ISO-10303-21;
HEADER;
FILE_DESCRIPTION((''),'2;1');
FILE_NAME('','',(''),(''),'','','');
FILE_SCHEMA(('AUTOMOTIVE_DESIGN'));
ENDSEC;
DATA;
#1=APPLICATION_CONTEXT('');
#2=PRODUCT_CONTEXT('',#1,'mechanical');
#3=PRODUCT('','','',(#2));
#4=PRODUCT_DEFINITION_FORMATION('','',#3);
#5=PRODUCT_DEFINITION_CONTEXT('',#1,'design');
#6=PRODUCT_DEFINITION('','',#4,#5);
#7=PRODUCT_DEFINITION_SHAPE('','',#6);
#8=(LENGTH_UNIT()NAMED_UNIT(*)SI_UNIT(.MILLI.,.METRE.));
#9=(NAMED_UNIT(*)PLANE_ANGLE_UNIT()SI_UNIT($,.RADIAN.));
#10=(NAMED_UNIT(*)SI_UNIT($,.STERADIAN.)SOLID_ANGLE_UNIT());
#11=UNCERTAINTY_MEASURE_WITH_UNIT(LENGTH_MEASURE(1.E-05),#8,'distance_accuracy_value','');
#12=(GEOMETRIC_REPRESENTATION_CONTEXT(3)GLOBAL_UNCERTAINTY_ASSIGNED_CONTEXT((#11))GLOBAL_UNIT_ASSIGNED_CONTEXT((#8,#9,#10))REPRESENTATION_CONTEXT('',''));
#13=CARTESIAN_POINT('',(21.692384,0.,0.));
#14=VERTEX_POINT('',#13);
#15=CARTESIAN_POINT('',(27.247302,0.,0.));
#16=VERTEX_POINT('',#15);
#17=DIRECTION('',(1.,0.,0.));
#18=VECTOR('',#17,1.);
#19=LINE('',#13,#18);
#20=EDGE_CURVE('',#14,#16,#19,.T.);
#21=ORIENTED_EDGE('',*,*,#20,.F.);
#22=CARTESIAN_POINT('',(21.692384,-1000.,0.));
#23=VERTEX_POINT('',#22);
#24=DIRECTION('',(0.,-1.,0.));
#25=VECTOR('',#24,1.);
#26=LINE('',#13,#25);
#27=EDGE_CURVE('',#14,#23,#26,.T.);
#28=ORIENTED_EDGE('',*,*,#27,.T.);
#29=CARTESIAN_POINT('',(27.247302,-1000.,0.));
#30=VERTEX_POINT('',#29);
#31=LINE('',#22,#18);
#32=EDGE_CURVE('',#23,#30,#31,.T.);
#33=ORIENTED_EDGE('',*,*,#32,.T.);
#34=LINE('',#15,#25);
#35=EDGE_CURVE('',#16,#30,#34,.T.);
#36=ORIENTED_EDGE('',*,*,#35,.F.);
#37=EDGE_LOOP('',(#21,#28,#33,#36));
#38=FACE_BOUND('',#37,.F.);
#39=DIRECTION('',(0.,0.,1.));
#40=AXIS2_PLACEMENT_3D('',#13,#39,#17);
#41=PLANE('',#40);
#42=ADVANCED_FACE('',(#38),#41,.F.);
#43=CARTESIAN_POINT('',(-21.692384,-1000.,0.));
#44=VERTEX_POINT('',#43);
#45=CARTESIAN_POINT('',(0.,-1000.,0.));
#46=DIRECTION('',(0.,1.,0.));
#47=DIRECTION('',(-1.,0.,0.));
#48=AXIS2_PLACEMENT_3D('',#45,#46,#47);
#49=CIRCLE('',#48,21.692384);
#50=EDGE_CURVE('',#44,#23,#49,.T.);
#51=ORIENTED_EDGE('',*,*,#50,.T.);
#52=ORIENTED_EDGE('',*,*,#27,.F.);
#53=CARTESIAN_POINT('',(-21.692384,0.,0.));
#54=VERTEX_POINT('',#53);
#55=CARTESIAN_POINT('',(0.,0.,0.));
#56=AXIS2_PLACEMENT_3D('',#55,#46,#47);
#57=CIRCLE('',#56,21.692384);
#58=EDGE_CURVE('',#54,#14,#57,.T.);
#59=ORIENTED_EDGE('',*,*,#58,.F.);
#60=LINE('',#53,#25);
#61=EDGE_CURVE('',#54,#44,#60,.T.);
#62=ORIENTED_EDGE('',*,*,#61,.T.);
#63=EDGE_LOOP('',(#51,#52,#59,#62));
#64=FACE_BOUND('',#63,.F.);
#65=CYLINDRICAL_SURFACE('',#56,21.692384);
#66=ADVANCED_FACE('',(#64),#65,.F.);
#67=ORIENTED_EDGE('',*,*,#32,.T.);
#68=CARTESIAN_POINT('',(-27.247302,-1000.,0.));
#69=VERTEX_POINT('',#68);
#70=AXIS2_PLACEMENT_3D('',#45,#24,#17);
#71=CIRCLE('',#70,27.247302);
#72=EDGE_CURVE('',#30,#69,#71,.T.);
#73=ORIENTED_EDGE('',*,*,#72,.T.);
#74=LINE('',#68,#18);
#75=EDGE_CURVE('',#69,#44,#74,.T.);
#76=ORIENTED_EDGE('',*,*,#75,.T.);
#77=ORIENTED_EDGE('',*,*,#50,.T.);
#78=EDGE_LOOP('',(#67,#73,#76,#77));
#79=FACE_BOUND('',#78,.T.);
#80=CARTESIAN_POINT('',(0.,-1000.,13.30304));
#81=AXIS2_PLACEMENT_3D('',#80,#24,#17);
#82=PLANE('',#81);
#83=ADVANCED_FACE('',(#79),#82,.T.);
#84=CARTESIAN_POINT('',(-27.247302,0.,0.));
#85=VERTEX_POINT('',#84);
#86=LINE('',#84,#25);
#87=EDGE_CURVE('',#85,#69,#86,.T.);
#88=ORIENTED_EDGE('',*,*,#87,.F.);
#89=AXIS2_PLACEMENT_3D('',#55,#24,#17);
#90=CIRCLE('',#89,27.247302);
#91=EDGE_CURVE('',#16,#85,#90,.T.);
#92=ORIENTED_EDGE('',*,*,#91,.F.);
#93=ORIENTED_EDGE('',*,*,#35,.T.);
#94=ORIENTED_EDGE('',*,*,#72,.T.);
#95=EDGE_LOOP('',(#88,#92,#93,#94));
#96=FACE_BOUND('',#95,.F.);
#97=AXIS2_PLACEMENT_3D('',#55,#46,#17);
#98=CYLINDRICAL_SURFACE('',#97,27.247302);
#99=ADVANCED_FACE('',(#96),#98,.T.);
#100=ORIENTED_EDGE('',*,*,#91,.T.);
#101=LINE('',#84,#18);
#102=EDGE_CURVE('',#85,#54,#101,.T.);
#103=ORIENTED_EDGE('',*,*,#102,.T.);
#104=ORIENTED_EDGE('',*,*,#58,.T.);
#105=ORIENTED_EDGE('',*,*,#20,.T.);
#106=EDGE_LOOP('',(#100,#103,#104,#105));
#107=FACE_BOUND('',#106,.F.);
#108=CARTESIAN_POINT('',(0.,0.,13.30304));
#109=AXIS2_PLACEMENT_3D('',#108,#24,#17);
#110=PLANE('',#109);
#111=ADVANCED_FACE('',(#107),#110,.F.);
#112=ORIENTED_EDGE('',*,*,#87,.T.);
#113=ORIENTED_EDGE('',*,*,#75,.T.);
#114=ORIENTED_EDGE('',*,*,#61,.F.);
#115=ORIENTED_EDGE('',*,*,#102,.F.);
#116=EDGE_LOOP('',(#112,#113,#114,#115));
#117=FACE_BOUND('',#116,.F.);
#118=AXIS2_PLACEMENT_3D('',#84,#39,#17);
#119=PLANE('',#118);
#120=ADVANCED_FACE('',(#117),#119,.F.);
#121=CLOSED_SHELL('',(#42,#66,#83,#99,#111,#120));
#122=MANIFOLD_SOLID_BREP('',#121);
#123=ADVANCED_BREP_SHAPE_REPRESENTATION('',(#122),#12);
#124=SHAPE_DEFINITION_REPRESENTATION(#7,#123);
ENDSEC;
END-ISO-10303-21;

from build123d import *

# Parameters (mm, degrees)
F1_DEPTH = 1000


# Not quite as in the source:
# - the program builds the solid bodies; features that only make, move or delete a surface that nothing else refers to are left out


with BuildPart() as f1:
    # F0 (on Front) → F1 (new body)
    with BuildSketch(Plane.XZ):
        with BuildLine():
            ThreePointArc((-21.6923840344, 0), (0, 21.6923840344), (21.6923840344, 0))
            Line((21.6923840344, 0), (27.2473022342, 0))
            ThreePointArc((27.2473022342, 0), (0, 27.2473022342), (-27.2473022342, 0))
            Line((-27.2473022342, 0), (-21.6923840344, 0))
        make_face()
    extrude(amount=F1_DEPTH)


solid = f1.part
